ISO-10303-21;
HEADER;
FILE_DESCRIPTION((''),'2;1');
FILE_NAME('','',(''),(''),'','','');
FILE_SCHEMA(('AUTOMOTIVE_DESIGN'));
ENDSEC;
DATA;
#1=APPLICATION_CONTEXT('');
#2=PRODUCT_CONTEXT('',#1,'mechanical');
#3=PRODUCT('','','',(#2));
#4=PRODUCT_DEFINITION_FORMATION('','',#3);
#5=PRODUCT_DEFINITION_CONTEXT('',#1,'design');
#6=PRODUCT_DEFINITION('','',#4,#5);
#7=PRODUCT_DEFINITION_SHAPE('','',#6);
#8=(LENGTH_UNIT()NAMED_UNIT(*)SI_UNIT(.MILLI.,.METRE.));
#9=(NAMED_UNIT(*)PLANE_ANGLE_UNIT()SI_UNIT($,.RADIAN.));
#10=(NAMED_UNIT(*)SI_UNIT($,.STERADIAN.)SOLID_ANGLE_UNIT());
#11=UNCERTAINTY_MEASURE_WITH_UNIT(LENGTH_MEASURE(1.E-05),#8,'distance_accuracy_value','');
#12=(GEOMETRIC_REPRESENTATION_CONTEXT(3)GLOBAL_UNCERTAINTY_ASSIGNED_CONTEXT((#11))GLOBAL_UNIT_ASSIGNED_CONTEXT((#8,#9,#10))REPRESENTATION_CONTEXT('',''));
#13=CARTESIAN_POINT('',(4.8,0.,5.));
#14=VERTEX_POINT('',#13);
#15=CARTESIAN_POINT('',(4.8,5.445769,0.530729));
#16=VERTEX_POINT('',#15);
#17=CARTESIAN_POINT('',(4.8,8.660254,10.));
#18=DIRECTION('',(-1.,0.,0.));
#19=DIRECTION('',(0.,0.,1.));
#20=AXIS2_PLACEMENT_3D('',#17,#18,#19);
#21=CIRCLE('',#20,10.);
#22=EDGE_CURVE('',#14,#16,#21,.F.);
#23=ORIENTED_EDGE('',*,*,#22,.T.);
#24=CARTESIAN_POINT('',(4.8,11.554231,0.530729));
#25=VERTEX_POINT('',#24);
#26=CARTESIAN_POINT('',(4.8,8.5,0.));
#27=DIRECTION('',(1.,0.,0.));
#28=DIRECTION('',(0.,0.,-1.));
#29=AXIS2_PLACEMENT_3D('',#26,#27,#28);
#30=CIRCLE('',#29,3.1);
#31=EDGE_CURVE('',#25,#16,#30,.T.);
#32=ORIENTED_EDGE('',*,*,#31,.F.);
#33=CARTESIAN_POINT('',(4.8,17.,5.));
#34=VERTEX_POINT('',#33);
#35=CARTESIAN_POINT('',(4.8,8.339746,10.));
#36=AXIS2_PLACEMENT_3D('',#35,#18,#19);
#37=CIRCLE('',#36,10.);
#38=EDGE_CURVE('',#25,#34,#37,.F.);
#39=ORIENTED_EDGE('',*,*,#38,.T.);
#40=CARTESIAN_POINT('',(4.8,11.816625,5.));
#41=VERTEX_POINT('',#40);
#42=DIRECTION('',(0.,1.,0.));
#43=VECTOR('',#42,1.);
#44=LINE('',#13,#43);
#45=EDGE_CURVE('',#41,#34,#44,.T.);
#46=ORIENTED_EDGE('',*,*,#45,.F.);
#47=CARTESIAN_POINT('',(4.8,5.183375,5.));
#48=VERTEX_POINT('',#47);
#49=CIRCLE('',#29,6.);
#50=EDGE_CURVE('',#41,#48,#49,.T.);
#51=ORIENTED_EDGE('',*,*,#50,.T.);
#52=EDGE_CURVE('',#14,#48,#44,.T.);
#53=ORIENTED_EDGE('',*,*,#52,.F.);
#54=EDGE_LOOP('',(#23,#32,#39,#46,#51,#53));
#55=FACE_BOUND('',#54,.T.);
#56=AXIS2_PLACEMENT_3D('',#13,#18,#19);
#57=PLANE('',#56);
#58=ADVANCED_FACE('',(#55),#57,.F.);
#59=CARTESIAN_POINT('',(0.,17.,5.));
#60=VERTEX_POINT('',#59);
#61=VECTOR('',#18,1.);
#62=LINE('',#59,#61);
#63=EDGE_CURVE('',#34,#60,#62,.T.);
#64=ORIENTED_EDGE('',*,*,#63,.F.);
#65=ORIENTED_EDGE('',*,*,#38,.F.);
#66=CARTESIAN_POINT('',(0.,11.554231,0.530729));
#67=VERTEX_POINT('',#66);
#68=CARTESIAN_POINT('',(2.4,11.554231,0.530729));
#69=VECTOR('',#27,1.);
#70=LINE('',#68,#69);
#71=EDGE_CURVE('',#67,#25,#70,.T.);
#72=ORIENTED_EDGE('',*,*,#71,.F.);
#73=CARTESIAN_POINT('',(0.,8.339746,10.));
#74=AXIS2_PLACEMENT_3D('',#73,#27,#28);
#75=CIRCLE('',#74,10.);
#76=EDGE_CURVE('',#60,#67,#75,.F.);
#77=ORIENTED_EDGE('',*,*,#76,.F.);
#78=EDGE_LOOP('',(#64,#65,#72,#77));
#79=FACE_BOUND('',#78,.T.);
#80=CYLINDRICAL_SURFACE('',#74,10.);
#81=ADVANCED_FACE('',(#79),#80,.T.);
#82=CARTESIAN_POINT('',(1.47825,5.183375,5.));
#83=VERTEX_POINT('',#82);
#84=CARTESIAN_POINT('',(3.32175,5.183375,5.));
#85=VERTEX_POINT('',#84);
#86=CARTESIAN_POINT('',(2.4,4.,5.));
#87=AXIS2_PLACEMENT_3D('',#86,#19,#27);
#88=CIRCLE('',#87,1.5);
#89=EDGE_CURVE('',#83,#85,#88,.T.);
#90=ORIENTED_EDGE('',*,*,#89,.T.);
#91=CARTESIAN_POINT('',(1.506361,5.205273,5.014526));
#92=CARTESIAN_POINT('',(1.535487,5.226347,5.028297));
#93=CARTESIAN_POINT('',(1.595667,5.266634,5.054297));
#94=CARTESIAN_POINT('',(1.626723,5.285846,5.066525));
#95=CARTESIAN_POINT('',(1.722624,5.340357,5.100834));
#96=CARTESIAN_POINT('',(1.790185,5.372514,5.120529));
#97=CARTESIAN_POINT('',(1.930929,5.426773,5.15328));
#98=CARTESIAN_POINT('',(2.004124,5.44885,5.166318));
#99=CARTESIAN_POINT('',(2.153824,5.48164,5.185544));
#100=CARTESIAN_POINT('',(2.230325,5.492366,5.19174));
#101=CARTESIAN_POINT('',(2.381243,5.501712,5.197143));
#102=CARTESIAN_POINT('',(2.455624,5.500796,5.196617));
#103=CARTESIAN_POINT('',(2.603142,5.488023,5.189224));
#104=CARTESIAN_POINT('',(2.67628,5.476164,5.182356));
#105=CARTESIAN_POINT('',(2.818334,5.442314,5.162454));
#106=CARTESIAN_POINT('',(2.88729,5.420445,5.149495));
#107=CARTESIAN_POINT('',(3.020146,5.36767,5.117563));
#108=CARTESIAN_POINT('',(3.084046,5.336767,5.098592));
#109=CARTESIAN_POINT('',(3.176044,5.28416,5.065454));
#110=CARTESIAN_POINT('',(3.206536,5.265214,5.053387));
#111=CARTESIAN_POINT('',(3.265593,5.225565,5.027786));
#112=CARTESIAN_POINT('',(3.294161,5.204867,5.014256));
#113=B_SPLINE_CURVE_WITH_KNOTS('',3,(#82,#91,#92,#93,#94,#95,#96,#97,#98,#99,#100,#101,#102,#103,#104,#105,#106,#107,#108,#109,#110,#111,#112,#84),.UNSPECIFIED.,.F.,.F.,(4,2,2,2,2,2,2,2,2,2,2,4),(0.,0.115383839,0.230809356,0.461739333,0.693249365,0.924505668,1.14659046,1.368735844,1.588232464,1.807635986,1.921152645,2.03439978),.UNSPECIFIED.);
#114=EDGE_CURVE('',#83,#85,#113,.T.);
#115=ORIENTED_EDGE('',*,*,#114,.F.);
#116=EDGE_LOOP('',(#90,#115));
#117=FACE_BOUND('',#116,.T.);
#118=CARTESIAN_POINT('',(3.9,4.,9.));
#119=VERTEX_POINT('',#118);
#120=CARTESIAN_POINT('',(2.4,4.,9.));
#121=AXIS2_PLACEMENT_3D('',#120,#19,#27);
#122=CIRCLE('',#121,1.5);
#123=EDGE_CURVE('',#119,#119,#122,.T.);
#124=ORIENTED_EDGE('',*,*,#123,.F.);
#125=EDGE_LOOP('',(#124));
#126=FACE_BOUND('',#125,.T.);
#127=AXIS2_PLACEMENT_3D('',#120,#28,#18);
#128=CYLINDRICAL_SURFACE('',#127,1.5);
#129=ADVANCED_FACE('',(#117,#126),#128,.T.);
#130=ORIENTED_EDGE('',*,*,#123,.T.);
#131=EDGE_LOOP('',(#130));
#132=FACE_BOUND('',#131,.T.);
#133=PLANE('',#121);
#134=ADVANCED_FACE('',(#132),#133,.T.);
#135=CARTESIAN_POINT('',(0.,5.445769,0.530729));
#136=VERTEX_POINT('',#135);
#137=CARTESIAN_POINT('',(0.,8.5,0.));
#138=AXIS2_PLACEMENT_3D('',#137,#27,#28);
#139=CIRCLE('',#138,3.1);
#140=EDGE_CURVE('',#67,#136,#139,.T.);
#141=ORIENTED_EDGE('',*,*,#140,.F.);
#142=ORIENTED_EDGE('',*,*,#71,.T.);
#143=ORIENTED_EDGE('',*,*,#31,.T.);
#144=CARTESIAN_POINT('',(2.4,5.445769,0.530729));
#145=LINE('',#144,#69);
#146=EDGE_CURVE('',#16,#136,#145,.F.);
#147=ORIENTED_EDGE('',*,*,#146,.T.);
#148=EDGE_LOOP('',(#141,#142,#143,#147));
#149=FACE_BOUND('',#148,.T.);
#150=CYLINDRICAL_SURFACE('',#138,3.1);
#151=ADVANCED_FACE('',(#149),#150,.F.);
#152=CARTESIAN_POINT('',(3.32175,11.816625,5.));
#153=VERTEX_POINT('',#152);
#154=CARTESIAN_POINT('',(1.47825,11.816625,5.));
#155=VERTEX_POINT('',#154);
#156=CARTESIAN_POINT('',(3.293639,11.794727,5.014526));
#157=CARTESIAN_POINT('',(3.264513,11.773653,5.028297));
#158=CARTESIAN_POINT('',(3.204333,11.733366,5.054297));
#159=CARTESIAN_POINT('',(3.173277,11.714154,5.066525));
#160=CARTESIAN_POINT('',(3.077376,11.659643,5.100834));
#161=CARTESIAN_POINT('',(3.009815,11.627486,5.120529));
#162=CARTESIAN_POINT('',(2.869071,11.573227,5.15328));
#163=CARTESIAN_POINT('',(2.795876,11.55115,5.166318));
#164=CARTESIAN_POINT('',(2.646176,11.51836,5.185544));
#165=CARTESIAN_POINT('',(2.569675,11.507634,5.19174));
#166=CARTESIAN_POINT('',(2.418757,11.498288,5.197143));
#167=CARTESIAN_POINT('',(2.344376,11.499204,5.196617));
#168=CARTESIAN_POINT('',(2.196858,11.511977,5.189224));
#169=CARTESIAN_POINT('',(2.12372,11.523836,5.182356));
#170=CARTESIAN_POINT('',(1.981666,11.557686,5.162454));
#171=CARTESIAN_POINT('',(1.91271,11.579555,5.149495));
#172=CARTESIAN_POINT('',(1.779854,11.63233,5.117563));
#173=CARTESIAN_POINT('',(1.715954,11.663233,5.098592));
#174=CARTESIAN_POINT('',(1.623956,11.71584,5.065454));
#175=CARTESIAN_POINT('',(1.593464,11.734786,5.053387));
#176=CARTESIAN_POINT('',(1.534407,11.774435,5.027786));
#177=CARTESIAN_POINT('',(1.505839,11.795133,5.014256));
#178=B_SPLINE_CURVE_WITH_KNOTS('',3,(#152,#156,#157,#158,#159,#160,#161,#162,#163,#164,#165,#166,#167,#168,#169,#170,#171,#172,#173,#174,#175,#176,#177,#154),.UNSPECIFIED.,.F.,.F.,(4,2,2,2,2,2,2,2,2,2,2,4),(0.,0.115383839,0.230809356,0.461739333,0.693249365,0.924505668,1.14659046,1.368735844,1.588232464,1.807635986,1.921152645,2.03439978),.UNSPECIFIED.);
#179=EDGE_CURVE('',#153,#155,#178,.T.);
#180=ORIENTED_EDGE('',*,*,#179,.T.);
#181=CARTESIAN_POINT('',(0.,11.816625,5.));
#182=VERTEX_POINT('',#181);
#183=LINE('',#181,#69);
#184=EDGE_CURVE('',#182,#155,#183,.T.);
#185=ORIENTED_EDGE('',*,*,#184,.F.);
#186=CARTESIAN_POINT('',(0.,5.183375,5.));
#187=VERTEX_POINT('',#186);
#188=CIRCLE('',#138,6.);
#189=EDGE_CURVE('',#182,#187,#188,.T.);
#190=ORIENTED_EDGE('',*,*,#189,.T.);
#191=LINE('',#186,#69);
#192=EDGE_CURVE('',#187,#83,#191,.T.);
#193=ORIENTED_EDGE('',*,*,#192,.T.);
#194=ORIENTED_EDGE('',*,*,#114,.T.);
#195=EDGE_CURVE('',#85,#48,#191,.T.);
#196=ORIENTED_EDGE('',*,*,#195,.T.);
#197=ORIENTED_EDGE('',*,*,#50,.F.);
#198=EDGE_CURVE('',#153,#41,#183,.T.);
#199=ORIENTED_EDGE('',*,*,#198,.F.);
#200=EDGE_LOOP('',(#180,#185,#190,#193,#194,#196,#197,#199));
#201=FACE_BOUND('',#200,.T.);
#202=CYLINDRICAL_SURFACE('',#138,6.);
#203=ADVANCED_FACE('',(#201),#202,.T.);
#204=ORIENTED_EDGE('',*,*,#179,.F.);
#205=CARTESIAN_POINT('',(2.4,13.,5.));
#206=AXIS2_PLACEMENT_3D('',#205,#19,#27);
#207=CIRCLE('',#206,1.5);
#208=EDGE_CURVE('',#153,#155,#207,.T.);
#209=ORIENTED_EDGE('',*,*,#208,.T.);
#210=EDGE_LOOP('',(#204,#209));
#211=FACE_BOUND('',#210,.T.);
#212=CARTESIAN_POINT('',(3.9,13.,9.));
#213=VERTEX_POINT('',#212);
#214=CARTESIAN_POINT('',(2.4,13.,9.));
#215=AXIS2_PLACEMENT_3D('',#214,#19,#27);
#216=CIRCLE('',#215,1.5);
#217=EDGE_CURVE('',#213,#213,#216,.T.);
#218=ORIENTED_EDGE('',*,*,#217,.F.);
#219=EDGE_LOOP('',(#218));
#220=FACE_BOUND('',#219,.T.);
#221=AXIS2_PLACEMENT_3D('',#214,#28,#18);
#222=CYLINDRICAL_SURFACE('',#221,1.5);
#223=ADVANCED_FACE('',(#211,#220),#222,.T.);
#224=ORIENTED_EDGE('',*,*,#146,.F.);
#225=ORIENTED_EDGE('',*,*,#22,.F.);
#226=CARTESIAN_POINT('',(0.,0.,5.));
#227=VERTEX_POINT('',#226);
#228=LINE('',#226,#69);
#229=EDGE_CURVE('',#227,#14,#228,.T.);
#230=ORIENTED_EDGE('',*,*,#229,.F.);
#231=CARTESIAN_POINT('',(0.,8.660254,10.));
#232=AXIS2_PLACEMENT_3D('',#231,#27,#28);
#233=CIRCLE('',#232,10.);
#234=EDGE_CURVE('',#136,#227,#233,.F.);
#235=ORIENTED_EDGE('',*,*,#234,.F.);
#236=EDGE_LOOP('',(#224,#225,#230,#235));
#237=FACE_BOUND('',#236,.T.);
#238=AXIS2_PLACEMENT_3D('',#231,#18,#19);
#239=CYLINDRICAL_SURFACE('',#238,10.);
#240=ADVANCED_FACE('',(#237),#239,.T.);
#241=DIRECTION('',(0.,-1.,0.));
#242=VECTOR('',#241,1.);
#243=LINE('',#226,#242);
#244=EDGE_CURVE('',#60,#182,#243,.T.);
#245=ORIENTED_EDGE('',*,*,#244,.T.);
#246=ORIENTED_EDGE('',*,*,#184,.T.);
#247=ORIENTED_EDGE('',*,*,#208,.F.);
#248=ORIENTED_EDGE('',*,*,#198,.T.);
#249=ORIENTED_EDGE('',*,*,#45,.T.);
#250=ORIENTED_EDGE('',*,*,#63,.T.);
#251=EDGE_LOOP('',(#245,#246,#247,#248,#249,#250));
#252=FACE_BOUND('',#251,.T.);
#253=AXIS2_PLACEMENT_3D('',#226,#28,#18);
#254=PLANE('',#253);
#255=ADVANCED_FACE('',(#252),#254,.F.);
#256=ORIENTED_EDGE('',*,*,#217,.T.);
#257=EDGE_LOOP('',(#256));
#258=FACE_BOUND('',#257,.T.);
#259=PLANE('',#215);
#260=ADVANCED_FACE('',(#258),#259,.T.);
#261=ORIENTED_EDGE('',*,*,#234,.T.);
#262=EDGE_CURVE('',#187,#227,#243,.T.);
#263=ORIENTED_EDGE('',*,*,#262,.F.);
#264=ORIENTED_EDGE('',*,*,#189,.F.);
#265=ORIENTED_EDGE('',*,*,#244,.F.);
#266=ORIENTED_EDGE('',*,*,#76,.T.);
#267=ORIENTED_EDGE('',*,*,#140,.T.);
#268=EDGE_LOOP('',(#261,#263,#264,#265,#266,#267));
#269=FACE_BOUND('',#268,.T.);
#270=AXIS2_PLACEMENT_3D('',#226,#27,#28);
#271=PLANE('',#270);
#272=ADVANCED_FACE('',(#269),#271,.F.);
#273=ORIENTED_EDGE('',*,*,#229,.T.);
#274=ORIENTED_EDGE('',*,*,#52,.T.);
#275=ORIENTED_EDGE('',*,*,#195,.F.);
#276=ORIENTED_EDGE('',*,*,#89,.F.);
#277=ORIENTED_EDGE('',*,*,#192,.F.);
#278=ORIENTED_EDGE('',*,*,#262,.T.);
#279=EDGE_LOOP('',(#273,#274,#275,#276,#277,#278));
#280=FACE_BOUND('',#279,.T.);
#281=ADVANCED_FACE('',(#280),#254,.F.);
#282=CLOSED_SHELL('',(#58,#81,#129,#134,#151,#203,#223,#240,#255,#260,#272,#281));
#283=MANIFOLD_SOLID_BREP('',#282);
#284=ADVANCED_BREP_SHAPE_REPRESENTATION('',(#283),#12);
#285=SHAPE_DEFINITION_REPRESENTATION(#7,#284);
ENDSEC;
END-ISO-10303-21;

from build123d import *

# Parameters (mm, degrees)
SKETCH_1_W          = 4.8
SKETCH_1_H          = 17
EXTRUDE_1_DEPTH     = 5
SKETCH_2_R          = 3.1
CUT_EXTRUDE_1_DEPTH = 19.358649188
EXTRUDE_2_DEPTH     = 4.8
FILLET_1_R          = 10
SKETCH_4_R          = 1.5
EXTRUDE_3_DEPTH     = 4


with BuildPart() as part:
    # 草图1 → 凸台-拉伸1 (new body)
    with BuildSketch(Plane.XY):
        with Locations((2.4, 8.5)):
            Rectangle(SKETCH_1_W, SKETCH_1_H)
    extrude(amount=EXTRUDE_1_DEPTH)

    # 草图2 → 切除-拉伸1 (cut, through all)
    with BuildSketch(Plane(origin=(4.8, 0, 0), x_dir=(0, 0, -1), z_dir=(1, 0, 0))):
        with Locations((0, 8.5)):
            Circle(SKETCH_2_R)
    extrude(amount=-CUT_EXTRUDE_1_DEPTH, mode=Mode.SUBTRACT)

    # 草图3 → 凸台-拉伸2 (add)
    with BuildSketch(Plane(origin=(4.8, 0, 0), x_dir=(0, 0, -1), z_dir=(1, 0, 0))):
        with BuildLine():
            Line((-5, 11.81662479), (-5, 5.18337521))
            ThreePointArc((-5, 5.18337521), (-6, 8.5), (-5, 11.81662479))
        make_face()
    extrude(amount=-EXTRUDE_2_DEPTH)

    # 圆角1
    # the kernel refuses this fillet: 10 mm, written as the material it takes off along each edge
    with BuildSketch(Plane(origin=(-21.650635095, 0, 0), x_dir=(0, 0, 1), z_dir=(1, 0, 0))) as fillet_1_piece_1:
        with BuildLine():
            CenterArc((10, -8.660254038), FILLET_1_R, 120, 60)
            Line((0, -8.660254038), (0, 0))
            Line((0, 0), (5, 0))
        make_face()
    extrude(amount=48.101270189, mode=Mode.SUBTRACT)
    with BuildSketch(Plane(origin=(26.450635095, 17, 0), x_dir=(0, -1, 0), z_dir=(-1, 0, 0))) as fillet_1_piece_2:
        with BuildLine():
            CenterArc((8.660254038, 10), FILLET_1_R, 210, 60)
            Line((0, 5), (0, 0))
            Line((0, 0), (8.660254038, 0))
        make_face()
    extrude(amount=48.101270189, mode=Mode.SUBTRACT)

    # 草图4 → 凸台-拉伸3 (add)
    with BuildSketch(Plane.XY.offset(5)):
        with Locations(Location((2.4, 13, 0), (0, 0, 232.08440029))):
            Circle(SKETCH_4_R)
        with Locations(Location((2.4, 4, 0), (0, 0, 127.91559971))):
            Circle(SKETCH_4_R)
    extrude(amount=EXTRUDE_3_DEPTH)


solid = part.part
